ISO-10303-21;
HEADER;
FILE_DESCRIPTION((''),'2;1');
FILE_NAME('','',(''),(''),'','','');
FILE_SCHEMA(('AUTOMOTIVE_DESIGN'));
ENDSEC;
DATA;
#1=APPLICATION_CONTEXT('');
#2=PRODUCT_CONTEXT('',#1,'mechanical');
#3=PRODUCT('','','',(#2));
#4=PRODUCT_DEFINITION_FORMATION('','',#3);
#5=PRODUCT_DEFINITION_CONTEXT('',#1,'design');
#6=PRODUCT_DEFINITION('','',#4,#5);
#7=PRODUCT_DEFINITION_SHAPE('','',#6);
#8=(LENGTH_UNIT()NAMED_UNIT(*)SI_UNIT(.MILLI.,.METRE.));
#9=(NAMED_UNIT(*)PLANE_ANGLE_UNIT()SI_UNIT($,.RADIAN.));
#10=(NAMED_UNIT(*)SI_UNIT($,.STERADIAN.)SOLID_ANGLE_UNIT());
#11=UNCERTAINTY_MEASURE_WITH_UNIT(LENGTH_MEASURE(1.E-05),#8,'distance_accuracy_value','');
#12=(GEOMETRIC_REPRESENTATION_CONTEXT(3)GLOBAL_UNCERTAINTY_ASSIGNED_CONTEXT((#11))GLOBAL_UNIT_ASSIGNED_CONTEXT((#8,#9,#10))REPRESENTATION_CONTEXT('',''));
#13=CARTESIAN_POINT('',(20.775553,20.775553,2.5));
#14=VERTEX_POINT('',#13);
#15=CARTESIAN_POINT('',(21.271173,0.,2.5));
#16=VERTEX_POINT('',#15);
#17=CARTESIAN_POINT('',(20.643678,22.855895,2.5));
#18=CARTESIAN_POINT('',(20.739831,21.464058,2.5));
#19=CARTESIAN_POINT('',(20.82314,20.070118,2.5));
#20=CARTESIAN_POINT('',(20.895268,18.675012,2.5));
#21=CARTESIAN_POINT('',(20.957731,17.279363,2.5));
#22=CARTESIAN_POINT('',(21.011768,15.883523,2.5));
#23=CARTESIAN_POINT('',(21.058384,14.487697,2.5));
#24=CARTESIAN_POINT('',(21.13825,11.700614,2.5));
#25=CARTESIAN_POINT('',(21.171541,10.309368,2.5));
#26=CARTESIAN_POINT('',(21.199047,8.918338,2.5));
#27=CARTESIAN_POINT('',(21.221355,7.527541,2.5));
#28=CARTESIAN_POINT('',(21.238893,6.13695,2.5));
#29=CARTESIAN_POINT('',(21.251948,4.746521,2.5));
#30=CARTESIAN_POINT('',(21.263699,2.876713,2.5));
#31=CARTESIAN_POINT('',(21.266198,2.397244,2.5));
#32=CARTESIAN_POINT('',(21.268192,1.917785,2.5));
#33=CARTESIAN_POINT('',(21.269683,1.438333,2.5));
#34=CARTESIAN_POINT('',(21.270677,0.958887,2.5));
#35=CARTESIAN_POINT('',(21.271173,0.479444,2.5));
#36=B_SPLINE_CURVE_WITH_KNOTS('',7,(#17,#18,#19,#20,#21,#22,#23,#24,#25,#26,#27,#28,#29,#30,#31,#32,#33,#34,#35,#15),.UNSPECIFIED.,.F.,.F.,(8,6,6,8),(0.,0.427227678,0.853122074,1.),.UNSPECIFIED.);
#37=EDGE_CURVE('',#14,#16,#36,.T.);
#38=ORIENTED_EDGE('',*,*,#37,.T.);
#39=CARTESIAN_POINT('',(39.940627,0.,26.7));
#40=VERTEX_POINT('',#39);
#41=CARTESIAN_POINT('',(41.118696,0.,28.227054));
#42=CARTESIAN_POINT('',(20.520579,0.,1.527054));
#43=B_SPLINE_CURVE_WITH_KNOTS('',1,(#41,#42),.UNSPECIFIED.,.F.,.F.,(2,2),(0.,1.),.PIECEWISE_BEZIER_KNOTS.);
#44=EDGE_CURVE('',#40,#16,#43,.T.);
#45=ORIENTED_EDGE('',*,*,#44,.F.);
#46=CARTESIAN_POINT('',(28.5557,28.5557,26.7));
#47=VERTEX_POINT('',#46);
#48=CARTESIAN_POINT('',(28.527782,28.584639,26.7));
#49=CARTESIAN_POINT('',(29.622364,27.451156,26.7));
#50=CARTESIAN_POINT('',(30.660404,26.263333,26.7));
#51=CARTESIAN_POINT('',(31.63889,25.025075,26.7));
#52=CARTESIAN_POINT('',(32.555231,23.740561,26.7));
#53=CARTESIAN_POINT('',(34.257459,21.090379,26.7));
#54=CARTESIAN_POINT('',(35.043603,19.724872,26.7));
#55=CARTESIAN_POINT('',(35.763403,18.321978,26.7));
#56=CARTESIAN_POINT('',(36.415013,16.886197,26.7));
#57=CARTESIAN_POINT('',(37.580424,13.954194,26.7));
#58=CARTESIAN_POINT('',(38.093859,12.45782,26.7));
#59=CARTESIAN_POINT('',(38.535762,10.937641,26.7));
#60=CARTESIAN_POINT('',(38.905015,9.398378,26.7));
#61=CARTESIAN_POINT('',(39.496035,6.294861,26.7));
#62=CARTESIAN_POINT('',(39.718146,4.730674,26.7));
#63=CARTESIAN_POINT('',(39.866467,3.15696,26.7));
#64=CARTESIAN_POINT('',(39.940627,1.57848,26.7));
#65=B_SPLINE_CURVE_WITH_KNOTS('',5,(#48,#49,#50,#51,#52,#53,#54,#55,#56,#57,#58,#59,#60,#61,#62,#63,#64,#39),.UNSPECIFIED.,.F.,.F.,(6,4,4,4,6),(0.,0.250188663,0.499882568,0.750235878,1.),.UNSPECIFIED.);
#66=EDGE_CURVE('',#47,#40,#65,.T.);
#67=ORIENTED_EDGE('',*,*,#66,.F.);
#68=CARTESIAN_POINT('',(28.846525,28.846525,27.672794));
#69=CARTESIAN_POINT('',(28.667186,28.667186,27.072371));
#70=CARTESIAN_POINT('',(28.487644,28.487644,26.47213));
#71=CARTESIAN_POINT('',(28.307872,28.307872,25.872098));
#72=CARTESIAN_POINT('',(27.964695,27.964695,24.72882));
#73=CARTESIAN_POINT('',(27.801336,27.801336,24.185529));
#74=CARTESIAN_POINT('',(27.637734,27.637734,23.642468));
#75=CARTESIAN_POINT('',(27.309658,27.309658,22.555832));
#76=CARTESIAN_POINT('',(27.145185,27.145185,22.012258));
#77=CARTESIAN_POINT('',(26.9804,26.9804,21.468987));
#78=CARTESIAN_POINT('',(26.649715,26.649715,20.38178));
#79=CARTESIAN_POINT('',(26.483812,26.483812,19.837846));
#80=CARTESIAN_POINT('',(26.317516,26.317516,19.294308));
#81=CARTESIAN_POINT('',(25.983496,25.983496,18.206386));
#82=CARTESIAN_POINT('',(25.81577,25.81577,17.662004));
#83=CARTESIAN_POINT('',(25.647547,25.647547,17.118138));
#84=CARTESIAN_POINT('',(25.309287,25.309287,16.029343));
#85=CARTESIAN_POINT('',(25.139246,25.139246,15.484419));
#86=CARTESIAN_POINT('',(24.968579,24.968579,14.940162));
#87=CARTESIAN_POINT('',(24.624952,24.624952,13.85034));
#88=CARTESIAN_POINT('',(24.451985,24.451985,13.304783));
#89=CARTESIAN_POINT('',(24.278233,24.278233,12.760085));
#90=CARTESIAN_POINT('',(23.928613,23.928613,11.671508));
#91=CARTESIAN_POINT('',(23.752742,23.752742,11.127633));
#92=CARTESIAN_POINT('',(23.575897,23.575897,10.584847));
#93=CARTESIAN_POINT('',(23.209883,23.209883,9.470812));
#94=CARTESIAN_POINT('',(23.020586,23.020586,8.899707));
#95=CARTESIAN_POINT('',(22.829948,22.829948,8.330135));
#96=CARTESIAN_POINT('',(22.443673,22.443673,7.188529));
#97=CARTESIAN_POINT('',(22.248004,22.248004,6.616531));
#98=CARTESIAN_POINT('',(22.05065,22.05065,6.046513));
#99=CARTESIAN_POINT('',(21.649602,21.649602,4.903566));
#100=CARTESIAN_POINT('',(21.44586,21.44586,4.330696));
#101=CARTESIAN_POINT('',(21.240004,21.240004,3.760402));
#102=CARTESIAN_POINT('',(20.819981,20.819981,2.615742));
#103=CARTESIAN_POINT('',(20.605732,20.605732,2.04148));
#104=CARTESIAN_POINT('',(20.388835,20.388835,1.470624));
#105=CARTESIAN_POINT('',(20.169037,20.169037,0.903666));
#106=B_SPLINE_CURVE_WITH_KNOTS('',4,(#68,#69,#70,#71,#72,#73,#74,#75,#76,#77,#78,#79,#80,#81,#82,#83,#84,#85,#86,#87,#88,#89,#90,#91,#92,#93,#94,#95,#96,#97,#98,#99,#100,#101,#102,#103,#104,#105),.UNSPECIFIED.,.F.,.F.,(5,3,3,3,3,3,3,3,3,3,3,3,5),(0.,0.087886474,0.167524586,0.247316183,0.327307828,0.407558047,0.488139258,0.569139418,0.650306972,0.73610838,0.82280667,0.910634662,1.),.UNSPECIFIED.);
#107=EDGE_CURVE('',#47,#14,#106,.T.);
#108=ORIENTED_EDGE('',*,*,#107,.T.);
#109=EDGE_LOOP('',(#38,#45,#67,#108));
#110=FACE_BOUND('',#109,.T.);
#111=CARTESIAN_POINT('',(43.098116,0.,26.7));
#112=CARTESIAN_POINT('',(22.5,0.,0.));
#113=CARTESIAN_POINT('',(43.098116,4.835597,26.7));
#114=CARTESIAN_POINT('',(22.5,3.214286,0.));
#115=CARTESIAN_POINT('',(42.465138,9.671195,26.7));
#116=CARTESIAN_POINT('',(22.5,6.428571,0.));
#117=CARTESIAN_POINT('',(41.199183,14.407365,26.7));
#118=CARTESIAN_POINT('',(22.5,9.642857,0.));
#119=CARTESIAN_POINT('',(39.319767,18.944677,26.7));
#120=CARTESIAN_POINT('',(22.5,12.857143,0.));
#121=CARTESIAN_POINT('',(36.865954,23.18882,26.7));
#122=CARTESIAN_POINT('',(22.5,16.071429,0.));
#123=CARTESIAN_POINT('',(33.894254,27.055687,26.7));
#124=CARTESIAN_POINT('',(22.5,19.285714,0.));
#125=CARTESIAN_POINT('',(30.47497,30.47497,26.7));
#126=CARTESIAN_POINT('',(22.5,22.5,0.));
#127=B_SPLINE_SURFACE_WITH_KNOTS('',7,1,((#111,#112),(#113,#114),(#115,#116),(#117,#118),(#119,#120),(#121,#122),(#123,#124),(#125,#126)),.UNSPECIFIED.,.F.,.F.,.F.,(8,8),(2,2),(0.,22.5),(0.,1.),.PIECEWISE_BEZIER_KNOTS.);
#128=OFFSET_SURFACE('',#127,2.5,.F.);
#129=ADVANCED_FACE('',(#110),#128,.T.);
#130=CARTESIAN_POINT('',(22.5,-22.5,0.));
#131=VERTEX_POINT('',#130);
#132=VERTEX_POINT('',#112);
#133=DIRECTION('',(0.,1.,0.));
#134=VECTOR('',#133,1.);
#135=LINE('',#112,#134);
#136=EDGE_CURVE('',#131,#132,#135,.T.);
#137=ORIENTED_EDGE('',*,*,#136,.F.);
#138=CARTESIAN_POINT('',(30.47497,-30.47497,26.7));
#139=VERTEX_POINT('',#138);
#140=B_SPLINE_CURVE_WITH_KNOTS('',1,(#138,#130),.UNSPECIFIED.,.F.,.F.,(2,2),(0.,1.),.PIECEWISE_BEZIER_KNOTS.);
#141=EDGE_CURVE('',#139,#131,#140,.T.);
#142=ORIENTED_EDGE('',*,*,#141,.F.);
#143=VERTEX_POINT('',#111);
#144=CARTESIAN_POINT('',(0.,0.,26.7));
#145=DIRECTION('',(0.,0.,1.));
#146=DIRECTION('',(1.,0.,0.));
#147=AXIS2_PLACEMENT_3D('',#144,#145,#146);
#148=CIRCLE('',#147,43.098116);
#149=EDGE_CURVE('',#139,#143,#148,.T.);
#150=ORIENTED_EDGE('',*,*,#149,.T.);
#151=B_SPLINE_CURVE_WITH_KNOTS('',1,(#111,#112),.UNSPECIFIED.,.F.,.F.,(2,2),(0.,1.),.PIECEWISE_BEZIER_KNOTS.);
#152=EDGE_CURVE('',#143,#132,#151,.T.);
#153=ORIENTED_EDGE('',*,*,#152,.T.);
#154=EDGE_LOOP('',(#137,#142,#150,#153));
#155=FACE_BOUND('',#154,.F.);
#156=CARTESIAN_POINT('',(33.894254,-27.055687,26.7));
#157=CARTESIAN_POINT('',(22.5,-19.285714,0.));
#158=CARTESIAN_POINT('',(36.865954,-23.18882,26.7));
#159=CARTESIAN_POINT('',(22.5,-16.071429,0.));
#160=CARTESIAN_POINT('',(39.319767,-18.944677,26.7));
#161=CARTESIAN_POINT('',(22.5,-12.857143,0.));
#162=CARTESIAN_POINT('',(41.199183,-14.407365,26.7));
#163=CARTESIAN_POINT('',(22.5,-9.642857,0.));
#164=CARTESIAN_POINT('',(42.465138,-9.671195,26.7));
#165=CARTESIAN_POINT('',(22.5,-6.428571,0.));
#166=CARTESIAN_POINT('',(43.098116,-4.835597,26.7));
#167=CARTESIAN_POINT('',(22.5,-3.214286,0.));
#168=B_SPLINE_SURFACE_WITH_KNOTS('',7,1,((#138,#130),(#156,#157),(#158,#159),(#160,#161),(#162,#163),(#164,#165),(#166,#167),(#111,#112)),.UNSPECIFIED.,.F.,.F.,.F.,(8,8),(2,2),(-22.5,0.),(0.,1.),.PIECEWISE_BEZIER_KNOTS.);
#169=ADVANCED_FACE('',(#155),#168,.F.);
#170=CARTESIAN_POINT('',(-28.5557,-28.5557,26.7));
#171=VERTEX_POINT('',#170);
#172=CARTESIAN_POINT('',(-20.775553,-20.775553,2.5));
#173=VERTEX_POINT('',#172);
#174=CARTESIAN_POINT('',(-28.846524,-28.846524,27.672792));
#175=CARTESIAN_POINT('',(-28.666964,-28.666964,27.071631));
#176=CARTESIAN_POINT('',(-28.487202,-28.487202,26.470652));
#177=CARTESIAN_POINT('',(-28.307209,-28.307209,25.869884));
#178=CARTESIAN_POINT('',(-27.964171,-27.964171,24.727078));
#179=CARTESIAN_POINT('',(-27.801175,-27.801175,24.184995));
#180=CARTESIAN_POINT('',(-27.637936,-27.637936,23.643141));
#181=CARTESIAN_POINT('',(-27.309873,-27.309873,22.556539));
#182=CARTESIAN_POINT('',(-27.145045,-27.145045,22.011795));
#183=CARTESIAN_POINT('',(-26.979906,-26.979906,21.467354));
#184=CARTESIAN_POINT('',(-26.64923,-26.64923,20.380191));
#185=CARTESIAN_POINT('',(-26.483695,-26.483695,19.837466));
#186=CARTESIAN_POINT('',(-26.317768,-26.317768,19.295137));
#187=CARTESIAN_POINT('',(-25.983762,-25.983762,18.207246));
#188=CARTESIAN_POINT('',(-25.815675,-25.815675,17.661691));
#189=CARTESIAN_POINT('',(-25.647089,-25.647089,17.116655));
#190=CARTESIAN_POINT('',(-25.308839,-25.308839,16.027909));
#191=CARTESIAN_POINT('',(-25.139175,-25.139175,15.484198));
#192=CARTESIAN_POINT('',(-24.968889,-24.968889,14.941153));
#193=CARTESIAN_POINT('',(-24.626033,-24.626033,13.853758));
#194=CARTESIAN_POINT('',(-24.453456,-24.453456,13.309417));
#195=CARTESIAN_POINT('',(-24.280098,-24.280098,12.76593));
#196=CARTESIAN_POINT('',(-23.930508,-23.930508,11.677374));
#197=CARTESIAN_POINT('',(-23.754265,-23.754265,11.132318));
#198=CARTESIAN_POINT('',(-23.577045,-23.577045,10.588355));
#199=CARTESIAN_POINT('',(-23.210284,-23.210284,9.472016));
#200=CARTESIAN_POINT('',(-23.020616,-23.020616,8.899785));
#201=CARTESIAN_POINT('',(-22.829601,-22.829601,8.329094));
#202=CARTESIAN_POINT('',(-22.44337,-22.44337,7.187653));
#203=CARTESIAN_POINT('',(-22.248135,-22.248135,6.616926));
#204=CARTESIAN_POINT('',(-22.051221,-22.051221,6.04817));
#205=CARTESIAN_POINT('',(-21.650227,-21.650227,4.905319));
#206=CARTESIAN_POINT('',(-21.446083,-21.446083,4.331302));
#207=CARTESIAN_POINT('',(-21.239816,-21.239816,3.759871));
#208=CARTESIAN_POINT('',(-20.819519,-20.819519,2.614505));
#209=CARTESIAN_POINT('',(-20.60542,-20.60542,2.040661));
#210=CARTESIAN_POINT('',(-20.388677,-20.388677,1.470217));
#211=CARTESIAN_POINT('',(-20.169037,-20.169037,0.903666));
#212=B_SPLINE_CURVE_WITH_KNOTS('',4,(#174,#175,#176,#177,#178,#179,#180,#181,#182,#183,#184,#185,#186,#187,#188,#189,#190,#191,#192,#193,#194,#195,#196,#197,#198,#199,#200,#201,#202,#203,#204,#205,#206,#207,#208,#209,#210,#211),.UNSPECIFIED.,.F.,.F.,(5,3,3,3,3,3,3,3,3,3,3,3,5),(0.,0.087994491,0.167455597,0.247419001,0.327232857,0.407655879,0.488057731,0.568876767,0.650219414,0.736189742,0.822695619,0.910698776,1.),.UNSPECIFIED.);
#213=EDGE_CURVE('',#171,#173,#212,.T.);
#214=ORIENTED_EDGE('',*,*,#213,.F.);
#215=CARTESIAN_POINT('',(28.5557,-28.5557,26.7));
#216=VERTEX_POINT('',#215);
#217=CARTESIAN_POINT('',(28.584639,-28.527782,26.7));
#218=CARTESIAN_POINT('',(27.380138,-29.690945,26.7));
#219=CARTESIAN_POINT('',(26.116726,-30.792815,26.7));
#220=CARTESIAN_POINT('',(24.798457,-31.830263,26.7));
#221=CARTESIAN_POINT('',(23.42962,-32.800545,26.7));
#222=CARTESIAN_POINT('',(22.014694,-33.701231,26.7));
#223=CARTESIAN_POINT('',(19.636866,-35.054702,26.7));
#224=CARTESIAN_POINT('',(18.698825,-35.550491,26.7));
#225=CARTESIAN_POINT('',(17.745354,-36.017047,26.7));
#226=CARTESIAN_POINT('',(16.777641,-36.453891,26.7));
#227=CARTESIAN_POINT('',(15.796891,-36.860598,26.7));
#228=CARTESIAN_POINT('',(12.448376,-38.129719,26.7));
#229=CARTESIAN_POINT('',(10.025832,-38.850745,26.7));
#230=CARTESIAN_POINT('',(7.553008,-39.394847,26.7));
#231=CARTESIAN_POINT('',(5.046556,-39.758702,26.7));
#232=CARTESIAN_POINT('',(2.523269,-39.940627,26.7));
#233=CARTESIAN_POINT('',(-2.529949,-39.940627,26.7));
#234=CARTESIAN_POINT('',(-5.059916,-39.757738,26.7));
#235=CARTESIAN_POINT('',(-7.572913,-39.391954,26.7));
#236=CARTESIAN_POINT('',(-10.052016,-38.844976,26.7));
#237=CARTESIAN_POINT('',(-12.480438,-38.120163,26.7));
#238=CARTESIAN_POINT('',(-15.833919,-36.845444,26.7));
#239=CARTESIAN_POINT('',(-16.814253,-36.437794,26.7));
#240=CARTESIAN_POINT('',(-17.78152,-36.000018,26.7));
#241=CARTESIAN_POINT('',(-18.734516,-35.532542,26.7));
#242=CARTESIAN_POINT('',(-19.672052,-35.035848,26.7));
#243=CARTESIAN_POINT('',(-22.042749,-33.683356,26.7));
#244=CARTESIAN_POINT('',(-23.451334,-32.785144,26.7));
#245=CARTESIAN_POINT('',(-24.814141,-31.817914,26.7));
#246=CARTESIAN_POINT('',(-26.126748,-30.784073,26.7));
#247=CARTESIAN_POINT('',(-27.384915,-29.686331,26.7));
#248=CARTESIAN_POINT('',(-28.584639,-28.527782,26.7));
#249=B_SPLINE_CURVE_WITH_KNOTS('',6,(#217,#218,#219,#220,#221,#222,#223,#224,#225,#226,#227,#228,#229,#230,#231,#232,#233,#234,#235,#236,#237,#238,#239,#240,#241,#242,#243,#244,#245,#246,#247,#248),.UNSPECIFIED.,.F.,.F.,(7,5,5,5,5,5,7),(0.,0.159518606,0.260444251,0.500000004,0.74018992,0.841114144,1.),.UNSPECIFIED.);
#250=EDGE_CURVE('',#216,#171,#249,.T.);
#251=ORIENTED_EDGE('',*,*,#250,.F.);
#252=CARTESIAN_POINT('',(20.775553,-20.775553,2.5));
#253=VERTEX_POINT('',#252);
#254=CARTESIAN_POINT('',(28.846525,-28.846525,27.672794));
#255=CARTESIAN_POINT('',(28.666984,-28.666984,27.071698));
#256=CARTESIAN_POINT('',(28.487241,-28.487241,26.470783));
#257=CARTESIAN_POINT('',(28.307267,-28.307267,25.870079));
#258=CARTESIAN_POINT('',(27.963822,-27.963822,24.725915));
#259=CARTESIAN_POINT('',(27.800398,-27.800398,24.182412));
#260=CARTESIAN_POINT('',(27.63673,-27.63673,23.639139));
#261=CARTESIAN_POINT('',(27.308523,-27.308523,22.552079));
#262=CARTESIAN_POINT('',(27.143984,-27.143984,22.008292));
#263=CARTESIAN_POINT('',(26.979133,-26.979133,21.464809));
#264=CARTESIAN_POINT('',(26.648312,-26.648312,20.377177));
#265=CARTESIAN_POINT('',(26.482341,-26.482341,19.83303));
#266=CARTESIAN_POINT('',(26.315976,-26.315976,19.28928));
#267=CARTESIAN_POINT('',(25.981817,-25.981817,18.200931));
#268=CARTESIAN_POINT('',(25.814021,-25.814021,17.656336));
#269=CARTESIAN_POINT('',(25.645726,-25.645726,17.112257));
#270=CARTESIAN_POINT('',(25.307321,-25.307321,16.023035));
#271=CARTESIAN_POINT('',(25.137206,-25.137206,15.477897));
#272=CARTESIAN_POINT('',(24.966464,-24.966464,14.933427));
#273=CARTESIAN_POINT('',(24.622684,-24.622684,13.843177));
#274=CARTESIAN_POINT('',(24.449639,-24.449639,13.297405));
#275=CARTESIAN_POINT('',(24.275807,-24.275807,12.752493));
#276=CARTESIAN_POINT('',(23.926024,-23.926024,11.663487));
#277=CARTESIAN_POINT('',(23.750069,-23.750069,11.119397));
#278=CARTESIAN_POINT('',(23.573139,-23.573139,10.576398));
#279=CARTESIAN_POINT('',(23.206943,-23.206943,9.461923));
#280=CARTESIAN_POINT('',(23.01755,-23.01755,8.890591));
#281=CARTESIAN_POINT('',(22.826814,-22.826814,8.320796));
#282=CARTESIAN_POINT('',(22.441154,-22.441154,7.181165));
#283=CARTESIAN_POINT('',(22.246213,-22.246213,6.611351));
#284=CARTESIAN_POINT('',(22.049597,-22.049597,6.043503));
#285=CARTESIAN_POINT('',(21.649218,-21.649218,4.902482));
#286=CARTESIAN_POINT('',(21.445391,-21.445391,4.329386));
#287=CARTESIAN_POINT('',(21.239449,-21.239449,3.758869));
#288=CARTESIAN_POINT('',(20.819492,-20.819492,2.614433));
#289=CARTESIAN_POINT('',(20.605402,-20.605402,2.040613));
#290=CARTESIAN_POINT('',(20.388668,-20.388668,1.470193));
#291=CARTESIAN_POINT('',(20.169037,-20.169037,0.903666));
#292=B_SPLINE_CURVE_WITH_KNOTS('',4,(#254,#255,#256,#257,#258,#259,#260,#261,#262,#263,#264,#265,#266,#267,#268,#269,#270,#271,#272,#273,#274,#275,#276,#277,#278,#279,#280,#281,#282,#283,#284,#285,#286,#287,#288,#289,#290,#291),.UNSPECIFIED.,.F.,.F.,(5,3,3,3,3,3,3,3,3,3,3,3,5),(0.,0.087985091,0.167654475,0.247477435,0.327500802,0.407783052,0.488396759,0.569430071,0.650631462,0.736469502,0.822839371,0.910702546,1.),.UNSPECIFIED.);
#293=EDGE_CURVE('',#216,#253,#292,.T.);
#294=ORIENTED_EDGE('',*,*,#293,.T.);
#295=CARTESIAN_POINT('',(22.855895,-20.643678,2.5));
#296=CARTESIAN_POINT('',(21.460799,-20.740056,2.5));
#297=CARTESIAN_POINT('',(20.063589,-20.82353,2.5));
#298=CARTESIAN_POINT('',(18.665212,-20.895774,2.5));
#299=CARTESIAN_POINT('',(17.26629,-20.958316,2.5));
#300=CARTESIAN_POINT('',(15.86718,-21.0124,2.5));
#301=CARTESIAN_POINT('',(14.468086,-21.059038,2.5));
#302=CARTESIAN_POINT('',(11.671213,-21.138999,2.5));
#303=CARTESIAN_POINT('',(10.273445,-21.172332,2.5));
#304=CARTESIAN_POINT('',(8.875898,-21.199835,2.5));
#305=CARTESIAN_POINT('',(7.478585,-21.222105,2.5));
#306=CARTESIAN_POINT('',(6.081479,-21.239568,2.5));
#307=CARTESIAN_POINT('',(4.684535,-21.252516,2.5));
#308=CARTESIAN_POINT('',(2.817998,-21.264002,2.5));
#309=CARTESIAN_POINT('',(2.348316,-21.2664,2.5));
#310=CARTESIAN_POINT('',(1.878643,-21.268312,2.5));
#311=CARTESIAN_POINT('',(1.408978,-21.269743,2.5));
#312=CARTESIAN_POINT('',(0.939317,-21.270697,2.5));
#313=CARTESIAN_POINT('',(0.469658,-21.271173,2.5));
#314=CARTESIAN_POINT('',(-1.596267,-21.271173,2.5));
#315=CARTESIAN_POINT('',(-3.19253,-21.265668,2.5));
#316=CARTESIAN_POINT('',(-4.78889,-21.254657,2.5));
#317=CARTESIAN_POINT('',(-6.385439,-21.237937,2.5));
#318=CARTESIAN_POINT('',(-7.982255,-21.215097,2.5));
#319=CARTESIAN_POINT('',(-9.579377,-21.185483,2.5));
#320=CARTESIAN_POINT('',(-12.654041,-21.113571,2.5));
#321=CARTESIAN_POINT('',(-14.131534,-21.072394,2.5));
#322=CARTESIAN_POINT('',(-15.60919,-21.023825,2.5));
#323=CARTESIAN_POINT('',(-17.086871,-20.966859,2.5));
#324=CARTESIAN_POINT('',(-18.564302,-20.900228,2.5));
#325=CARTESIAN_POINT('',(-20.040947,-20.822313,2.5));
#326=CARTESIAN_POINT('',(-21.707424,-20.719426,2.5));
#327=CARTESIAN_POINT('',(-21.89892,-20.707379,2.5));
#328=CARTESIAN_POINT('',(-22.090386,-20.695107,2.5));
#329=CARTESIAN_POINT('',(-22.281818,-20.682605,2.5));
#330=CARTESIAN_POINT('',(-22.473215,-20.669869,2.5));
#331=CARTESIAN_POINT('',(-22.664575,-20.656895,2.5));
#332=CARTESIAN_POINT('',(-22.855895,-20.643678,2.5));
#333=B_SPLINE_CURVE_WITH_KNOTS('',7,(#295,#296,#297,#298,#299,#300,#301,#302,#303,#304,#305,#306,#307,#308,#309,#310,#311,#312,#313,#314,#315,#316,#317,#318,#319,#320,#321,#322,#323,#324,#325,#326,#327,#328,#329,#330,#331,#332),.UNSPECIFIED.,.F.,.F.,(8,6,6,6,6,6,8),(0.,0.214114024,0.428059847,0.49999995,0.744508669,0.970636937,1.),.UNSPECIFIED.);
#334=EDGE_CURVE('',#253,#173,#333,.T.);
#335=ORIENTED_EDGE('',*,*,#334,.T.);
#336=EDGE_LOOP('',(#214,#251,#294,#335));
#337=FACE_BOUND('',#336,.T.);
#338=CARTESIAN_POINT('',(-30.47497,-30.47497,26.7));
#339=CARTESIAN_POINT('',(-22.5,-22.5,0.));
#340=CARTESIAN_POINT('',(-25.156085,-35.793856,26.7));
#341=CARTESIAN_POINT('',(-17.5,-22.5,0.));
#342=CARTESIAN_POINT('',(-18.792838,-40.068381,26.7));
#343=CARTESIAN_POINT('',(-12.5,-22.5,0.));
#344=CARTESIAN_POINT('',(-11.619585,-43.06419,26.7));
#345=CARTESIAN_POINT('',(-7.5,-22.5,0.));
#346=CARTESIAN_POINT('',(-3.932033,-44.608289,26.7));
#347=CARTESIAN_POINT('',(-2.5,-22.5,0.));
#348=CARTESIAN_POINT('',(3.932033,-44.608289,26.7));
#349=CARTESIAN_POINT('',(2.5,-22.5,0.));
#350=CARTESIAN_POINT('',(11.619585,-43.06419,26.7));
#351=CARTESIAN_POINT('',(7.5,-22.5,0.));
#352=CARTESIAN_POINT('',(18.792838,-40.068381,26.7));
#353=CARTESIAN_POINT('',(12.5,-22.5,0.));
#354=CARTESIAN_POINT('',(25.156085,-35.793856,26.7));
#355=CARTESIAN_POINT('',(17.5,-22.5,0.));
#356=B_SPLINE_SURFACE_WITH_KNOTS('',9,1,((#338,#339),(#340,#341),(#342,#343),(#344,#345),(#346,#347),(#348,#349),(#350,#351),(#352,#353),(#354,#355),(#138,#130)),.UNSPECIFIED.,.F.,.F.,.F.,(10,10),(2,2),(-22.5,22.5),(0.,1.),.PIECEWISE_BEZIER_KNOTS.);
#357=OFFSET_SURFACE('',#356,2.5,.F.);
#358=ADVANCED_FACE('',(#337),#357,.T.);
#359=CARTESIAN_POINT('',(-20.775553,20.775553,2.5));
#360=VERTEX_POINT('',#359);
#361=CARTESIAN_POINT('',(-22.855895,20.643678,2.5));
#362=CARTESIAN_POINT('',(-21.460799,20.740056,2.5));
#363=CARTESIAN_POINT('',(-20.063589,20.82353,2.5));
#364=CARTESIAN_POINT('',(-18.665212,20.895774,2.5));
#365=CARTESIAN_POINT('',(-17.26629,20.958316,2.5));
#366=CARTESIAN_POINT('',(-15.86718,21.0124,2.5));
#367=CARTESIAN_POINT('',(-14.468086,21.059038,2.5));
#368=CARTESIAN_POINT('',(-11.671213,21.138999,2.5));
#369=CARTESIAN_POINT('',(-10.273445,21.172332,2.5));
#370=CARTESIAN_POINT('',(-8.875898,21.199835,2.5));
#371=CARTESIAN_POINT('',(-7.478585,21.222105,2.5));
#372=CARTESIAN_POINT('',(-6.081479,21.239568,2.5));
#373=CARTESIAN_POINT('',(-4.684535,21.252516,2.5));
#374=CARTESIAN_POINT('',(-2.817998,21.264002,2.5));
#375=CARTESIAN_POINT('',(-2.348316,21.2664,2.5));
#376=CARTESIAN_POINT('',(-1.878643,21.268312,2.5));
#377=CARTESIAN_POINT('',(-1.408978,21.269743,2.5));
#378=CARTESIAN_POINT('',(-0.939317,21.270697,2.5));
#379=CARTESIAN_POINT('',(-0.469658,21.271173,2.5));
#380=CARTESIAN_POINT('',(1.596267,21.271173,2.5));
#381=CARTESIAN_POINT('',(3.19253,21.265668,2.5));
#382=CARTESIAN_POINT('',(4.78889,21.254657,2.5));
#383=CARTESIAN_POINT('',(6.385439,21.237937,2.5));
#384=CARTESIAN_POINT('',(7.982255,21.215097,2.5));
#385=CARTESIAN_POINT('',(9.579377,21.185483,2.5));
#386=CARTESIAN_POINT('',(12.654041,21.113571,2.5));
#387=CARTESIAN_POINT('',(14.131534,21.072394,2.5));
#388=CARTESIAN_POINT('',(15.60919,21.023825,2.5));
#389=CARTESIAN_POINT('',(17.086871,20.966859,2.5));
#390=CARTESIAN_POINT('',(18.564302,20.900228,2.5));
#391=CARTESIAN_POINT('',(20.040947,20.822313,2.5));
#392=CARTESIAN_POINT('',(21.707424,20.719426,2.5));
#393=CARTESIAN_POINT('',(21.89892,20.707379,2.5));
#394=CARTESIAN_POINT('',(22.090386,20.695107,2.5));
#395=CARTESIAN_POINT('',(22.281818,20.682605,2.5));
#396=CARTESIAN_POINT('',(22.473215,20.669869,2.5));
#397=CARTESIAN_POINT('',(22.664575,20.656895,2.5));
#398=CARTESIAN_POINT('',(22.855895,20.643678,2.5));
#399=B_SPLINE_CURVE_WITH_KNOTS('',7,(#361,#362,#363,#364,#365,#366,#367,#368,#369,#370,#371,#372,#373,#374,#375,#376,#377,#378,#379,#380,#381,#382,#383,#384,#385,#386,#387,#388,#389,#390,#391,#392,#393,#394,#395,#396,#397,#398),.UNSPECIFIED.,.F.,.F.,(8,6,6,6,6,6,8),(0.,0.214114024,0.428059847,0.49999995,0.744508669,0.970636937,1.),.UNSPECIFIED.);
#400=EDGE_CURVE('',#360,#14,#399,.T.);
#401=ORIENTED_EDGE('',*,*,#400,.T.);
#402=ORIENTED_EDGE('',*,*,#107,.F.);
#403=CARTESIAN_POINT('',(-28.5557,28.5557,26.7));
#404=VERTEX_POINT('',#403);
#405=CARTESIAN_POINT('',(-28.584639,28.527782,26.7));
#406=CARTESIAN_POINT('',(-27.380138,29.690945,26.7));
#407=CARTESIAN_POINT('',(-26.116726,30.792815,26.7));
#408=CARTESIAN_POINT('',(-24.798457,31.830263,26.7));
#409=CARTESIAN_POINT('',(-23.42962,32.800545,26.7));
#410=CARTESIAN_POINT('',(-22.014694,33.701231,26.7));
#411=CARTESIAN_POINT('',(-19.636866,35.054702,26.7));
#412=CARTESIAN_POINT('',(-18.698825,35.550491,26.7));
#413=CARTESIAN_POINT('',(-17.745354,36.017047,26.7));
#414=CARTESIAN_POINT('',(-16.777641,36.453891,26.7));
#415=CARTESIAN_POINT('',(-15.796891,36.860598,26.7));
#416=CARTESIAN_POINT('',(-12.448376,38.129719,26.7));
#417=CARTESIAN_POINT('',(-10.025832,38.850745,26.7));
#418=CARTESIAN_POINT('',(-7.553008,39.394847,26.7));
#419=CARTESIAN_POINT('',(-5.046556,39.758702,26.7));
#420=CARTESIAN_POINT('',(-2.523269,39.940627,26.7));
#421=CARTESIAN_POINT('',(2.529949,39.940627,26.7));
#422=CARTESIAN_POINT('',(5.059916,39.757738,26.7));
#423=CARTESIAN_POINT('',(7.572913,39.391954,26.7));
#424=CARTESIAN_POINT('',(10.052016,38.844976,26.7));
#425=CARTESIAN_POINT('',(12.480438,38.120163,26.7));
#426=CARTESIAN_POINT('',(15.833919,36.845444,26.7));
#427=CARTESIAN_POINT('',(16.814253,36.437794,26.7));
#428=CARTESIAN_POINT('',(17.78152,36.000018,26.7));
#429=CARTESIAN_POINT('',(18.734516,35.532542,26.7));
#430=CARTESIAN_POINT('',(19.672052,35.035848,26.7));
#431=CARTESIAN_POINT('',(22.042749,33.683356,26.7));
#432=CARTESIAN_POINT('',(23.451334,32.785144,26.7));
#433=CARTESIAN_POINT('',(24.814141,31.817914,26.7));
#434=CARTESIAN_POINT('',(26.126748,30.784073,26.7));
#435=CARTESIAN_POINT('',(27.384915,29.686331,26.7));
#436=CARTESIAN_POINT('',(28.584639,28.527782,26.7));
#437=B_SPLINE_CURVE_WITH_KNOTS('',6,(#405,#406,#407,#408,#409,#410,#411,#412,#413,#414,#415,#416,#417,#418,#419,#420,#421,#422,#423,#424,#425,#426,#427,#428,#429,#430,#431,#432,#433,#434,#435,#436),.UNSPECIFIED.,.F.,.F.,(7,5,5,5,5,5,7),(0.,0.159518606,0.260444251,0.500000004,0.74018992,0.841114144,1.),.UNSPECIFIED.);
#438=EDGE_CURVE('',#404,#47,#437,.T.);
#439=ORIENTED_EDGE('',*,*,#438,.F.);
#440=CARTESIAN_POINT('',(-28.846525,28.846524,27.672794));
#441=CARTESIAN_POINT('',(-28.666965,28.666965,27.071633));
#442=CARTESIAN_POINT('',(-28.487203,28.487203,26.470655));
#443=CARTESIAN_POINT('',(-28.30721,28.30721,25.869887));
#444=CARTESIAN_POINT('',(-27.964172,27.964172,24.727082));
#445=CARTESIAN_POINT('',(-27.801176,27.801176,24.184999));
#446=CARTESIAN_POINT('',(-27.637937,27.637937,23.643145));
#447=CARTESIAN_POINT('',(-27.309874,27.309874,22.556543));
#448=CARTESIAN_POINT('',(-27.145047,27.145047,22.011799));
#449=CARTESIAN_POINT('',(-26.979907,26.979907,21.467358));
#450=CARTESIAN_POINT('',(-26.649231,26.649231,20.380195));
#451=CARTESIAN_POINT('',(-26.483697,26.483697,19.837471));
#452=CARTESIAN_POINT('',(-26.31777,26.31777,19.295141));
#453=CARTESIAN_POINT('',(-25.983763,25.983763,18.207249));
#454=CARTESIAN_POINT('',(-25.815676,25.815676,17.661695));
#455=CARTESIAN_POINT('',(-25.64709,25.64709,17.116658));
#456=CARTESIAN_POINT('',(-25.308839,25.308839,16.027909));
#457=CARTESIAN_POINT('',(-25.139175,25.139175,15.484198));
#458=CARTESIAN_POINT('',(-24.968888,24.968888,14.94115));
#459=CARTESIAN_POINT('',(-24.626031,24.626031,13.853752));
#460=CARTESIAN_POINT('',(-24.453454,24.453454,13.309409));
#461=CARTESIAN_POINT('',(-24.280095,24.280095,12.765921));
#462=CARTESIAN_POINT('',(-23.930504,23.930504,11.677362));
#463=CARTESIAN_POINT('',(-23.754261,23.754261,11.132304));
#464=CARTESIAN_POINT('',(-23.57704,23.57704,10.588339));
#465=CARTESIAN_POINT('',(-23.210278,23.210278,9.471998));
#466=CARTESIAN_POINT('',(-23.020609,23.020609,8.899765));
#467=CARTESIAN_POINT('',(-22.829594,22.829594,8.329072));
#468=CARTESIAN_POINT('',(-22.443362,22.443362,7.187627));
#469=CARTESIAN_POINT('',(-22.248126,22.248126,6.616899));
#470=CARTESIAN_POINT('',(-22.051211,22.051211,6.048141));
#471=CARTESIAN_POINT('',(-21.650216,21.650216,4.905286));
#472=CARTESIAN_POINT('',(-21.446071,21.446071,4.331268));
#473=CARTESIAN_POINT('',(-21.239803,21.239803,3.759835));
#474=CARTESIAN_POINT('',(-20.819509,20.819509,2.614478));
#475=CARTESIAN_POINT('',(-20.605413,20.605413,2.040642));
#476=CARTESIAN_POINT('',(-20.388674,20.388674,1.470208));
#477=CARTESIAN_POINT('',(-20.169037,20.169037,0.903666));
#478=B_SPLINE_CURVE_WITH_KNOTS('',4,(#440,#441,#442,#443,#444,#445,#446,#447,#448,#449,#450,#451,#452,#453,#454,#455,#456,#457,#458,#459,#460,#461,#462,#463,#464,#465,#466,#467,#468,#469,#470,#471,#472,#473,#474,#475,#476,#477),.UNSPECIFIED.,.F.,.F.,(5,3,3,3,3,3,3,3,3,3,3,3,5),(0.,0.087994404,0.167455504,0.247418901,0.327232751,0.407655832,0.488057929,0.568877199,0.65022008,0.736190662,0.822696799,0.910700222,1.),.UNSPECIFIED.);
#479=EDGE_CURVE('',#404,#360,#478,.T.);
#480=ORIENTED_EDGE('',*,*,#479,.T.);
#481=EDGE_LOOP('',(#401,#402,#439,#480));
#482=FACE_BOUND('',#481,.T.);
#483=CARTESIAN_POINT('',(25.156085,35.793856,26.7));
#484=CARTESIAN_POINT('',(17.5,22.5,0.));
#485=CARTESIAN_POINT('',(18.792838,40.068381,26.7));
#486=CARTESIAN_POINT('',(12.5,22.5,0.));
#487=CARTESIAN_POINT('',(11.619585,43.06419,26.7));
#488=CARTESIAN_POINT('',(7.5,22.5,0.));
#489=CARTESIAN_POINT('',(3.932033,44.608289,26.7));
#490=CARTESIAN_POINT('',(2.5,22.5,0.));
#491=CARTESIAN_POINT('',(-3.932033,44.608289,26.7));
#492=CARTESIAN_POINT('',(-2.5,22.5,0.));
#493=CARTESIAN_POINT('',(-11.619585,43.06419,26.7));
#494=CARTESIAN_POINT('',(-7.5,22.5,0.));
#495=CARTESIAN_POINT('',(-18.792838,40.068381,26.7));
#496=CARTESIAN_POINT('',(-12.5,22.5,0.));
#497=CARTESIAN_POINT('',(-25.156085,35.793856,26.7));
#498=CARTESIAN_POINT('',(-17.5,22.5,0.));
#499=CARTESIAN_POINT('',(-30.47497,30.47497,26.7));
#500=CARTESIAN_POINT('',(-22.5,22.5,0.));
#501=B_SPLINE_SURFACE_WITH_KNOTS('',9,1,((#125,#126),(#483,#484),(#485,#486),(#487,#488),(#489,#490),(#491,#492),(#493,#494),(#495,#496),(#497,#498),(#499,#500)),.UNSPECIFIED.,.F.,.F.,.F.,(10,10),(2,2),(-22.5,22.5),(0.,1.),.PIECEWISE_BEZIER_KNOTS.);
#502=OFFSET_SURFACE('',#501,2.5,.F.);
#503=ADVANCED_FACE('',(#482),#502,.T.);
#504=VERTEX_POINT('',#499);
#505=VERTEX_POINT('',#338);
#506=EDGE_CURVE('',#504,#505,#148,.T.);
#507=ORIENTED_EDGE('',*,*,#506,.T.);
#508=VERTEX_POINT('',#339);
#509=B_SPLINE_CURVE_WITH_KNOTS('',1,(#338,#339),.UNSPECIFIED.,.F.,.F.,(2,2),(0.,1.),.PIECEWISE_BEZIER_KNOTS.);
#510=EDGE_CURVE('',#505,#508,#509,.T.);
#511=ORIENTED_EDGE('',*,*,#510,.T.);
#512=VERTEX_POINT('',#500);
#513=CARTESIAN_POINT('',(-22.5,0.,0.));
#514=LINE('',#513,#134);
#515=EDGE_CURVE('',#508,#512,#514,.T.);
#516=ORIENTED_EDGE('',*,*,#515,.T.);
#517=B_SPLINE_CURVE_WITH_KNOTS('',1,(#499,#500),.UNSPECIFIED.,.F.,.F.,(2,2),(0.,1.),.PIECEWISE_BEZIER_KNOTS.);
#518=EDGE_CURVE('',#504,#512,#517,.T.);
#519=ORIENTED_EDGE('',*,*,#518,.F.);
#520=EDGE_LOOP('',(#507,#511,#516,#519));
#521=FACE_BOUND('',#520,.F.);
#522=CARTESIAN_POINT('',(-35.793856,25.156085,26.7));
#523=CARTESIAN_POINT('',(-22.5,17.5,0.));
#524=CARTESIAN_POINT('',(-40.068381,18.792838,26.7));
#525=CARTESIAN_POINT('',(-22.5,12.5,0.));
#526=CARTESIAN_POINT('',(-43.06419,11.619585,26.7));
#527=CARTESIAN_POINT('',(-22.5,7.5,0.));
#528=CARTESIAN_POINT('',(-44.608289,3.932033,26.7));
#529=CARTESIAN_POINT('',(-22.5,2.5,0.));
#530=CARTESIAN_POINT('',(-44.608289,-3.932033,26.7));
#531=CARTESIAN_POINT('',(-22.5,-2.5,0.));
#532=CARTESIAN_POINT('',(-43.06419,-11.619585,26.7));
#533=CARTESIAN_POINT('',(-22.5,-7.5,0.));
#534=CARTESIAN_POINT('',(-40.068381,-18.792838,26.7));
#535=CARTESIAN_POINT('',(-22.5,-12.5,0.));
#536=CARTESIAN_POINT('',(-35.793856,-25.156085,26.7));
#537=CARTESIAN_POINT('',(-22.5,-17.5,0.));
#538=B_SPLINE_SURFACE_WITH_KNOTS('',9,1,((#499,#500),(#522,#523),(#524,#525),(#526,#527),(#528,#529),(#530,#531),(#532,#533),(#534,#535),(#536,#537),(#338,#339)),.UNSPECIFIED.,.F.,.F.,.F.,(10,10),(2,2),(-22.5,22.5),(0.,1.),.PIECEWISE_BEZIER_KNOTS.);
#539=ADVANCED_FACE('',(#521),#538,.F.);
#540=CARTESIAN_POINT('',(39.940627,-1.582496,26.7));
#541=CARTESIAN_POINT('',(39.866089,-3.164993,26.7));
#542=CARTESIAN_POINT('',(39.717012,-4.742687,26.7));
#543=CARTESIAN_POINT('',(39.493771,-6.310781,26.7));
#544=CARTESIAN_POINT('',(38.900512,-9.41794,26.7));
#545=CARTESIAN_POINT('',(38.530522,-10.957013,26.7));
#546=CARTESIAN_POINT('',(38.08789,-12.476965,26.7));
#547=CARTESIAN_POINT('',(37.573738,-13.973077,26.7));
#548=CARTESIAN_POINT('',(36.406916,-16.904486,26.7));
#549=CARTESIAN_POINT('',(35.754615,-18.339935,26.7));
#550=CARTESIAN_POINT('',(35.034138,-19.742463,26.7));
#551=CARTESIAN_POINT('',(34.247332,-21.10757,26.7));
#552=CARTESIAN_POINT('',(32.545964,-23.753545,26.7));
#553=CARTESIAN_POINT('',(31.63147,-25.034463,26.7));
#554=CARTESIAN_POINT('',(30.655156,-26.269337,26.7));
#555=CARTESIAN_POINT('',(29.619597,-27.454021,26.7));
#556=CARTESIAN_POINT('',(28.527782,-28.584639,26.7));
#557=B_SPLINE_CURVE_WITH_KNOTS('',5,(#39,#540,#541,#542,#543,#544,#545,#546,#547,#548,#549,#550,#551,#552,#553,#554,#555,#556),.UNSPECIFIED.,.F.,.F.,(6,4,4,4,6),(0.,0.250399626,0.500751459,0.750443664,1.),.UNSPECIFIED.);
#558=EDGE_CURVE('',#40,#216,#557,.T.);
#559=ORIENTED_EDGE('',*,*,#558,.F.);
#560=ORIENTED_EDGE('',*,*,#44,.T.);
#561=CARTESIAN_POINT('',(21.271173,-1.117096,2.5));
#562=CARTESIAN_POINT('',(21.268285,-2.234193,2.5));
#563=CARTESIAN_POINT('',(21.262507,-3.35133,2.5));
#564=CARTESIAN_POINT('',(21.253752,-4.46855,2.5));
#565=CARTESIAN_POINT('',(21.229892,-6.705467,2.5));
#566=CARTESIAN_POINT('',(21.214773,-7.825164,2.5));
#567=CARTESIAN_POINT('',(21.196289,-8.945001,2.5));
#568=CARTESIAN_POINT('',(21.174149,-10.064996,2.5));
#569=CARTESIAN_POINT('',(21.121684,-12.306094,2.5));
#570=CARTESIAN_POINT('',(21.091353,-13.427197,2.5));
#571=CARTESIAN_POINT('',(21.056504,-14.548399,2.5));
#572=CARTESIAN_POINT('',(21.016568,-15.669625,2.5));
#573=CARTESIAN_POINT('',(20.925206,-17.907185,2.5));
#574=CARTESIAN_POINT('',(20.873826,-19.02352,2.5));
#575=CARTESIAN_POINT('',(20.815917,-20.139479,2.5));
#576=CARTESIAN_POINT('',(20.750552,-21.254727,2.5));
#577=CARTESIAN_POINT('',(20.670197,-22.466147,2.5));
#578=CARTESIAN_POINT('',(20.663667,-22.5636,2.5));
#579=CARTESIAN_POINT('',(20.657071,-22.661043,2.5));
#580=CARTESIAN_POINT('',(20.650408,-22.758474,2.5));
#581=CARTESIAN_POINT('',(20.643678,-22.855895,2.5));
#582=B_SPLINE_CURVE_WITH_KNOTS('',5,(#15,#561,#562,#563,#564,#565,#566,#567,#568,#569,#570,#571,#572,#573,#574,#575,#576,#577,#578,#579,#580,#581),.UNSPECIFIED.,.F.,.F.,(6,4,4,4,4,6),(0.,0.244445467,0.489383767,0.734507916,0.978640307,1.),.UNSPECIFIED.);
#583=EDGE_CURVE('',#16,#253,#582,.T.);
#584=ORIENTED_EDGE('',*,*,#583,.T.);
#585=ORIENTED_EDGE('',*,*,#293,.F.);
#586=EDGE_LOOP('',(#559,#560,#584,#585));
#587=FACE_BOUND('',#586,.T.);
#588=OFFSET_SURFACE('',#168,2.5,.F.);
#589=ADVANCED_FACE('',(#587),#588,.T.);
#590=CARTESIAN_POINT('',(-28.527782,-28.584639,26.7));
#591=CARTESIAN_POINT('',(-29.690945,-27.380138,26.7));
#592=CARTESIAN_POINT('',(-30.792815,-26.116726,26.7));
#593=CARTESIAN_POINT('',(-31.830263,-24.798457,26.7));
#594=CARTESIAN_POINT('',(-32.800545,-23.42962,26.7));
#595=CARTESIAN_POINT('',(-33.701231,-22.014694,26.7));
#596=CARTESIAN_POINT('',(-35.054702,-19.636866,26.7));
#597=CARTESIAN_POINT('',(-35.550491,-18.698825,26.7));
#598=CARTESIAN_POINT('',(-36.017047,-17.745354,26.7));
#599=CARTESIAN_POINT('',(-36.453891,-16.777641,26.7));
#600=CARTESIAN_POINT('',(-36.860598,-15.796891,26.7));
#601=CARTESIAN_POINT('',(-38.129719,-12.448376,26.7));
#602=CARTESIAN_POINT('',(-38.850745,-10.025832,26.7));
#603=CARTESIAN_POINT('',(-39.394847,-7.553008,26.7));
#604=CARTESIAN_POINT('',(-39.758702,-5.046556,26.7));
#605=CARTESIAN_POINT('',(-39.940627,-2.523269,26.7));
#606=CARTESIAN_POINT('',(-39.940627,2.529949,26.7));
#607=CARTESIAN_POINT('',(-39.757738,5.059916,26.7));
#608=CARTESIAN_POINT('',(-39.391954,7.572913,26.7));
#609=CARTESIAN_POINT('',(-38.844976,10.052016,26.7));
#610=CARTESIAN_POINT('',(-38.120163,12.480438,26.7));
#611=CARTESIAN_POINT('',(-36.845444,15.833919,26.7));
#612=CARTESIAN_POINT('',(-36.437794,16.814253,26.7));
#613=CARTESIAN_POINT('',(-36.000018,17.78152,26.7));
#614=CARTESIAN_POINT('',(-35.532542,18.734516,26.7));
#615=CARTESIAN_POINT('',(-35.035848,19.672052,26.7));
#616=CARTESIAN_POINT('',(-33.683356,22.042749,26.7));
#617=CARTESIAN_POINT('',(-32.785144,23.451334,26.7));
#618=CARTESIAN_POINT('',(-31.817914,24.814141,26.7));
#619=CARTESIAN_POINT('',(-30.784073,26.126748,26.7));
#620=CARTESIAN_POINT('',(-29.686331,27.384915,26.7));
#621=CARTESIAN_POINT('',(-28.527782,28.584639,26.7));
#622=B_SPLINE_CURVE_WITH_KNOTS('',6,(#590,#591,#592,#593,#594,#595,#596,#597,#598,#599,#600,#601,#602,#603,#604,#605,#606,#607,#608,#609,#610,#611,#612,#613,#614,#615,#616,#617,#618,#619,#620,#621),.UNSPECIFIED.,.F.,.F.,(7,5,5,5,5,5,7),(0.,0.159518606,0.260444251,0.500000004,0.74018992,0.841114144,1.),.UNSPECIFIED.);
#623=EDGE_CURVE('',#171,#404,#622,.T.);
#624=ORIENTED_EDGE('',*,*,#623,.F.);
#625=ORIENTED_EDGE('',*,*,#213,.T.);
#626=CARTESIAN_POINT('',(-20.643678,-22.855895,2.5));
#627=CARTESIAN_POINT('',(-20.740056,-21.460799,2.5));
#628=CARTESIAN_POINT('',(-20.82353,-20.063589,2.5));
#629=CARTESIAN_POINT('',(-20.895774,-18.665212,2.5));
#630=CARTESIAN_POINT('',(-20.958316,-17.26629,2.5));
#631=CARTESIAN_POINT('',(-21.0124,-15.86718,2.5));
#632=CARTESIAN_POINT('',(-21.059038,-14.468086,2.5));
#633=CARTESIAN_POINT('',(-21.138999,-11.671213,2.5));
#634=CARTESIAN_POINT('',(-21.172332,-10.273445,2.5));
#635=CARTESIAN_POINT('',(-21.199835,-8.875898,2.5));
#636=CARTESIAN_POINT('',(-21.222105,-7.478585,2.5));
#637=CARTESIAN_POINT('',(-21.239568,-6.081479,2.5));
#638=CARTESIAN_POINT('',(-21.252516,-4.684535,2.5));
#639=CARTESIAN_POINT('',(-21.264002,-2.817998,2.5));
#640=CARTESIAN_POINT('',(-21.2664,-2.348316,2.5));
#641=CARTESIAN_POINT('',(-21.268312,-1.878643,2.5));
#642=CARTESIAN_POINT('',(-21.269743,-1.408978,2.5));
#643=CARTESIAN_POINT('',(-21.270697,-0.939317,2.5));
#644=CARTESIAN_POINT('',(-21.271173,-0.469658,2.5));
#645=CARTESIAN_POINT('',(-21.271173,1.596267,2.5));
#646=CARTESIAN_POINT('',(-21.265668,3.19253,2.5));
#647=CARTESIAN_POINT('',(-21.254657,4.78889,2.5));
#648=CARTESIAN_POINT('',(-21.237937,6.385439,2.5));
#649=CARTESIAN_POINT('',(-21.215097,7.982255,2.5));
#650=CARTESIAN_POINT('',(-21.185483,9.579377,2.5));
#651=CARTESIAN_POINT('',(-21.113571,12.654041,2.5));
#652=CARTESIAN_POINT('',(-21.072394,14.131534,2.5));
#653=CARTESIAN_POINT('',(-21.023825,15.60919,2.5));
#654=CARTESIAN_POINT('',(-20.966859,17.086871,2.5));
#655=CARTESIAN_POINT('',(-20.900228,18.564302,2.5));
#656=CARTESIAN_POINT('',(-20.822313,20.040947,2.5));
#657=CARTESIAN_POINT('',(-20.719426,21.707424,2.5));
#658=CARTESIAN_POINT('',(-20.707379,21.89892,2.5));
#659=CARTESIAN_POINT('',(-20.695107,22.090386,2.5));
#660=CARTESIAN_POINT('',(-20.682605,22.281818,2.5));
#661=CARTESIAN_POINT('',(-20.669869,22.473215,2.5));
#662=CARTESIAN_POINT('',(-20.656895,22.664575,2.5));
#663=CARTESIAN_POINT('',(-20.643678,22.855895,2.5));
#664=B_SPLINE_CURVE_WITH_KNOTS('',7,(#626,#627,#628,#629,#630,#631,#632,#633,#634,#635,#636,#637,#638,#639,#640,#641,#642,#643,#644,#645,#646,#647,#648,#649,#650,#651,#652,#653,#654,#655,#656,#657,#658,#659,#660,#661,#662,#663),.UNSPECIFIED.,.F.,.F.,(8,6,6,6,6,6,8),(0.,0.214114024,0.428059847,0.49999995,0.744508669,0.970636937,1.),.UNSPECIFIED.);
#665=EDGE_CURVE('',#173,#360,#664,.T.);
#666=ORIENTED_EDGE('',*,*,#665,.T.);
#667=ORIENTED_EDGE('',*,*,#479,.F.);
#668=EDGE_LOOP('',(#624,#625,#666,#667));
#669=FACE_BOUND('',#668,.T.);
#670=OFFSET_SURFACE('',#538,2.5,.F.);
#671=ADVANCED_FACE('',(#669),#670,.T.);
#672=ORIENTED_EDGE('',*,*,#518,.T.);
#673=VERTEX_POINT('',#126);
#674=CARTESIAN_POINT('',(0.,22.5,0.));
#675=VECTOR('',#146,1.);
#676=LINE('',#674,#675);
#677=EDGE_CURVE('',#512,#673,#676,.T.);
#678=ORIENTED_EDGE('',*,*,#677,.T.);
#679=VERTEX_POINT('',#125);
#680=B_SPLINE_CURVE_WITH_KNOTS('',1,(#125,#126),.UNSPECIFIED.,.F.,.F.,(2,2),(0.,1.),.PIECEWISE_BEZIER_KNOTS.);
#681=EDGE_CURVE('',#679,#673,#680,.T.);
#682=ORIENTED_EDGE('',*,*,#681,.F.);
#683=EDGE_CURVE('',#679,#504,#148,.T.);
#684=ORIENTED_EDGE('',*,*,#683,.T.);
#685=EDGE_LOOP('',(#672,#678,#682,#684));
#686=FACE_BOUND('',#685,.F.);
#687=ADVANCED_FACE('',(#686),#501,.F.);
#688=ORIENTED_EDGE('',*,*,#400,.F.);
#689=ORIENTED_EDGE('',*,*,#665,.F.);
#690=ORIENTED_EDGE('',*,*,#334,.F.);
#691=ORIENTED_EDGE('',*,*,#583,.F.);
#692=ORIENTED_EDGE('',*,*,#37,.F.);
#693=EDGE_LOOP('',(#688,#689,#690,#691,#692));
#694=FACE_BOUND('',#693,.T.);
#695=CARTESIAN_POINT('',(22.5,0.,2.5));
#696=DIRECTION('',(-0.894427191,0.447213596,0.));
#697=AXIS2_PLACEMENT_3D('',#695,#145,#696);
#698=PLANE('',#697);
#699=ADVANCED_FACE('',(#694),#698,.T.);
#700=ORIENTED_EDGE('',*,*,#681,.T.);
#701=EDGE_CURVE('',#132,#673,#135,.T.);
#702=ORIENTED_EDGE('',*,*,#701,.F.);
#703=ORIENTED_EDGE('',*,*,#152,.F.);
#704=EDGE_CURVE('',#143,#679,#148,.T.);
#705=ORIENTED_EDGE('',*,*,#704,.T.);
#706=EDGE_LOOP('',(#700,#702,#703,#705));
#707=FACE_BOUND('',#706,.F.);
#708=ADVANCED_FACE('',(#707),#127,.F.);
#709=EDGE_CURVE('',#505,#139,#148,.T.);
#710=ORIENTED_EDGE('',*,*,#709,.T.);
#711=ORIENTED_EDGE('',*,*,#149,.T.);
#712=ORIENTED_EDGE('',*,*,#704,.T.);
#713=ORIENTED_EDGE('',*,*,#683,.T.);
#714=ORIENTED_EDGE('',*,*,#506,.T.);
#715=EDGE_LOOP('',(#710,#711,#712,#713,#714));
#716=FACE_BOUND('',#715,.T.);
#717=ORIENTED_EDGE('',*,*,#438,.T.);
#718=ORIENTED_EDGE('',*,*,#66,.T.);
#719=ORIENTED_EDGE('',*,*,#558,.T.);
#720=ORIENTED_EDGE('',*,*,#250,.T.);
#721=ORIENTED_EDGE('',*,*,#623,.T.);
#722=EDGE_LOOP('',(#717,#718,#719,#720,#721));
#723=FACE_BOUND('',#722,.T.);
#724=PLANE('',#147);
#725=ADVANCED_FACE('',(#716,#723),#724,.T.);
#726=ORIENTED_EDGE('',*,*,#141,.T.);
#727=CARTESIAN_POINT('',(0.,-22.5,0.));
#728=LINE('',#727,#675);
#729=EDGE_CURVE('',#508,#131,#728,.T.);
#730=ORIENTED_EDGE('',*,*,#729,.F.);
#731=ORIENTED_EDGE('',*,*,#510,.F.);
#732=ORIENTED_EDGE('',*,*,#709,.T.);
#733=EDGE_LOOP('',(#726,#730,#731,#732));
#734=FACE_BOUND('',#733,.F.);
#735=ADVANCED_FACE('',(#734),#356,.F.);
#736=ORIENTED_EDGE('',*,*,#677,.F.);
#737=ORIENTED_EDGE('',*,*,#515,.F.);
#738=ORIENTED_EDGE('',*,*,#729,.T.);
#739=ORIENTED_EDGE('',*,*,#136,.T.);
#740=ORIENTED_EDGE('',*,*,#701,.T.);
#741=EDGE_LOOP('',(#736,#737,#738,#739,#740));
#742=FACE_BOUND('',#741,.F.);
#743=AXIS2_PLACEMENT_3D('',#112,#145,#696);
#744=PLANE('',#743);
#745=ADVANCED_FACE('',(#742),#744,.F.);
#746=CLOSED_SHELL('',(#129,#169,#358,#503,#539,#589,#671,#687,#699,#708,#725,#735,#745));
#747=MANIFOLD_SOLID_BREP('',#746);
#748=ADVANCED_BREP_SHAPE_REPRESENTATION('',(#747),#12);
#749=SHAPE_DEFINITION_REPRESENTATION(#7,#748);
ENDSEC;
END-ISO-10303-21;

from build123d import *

# Parameters (mm, degrees)
F2_R = 43.0981164558
F1_W = 45
F1_H = 45
F4_T = 2.5


# Not quite as in the source:
# - a shell that OpenCascade refuses in one call is made with other operations: the cavity is built on its own and cut out


with BuildPart() as f3:
    # F2 (on offset) → F3 section 0
    with BuildSketch(Plane.XY.offset(26.7)):
        Circle(F2_R)
    # F1 (on Top) → F3 section 1
    with BuildSketch(Plane.XY):
        Rectangle(F1_W, F1_H)
    loft()

    # F4: shell of thickness 2.5, made by hand


with BuildPart() as f4_core1:
    # F4_t2: copy of F3
    add(f3.part)

    # the walls: a layer under each face that stays
    f4_faces = [f4_core1.faces().sort_by_distance(p)[0] for p in [
        (31.1587338374, 13.8714675651, 13.35),
        (0, 32.7990582263, 13.35),
        (-32.7990582263, 0, 13.35),
        (0, -32.7990582263, 13.35),
        (31.1587338374, -13.8714675651, 13.35),
        (0, 0, 0),
    ]]
    thicken(f4_faces, amount=-F4_T, mode=Mode.SUBTRACT)


with BuildPart() as f3_1:
    add(f3.part)

    # what is left inside the walls is the cavity
    f4_cavity = [f4_core1.part.solids().sort_by_distance(p)[0] for p in [
        (0, -13.313542, 26.675),
    ]]
    add(f4_cavity, mode=Mode.SUBTRACT)


solid = f3_1.part
